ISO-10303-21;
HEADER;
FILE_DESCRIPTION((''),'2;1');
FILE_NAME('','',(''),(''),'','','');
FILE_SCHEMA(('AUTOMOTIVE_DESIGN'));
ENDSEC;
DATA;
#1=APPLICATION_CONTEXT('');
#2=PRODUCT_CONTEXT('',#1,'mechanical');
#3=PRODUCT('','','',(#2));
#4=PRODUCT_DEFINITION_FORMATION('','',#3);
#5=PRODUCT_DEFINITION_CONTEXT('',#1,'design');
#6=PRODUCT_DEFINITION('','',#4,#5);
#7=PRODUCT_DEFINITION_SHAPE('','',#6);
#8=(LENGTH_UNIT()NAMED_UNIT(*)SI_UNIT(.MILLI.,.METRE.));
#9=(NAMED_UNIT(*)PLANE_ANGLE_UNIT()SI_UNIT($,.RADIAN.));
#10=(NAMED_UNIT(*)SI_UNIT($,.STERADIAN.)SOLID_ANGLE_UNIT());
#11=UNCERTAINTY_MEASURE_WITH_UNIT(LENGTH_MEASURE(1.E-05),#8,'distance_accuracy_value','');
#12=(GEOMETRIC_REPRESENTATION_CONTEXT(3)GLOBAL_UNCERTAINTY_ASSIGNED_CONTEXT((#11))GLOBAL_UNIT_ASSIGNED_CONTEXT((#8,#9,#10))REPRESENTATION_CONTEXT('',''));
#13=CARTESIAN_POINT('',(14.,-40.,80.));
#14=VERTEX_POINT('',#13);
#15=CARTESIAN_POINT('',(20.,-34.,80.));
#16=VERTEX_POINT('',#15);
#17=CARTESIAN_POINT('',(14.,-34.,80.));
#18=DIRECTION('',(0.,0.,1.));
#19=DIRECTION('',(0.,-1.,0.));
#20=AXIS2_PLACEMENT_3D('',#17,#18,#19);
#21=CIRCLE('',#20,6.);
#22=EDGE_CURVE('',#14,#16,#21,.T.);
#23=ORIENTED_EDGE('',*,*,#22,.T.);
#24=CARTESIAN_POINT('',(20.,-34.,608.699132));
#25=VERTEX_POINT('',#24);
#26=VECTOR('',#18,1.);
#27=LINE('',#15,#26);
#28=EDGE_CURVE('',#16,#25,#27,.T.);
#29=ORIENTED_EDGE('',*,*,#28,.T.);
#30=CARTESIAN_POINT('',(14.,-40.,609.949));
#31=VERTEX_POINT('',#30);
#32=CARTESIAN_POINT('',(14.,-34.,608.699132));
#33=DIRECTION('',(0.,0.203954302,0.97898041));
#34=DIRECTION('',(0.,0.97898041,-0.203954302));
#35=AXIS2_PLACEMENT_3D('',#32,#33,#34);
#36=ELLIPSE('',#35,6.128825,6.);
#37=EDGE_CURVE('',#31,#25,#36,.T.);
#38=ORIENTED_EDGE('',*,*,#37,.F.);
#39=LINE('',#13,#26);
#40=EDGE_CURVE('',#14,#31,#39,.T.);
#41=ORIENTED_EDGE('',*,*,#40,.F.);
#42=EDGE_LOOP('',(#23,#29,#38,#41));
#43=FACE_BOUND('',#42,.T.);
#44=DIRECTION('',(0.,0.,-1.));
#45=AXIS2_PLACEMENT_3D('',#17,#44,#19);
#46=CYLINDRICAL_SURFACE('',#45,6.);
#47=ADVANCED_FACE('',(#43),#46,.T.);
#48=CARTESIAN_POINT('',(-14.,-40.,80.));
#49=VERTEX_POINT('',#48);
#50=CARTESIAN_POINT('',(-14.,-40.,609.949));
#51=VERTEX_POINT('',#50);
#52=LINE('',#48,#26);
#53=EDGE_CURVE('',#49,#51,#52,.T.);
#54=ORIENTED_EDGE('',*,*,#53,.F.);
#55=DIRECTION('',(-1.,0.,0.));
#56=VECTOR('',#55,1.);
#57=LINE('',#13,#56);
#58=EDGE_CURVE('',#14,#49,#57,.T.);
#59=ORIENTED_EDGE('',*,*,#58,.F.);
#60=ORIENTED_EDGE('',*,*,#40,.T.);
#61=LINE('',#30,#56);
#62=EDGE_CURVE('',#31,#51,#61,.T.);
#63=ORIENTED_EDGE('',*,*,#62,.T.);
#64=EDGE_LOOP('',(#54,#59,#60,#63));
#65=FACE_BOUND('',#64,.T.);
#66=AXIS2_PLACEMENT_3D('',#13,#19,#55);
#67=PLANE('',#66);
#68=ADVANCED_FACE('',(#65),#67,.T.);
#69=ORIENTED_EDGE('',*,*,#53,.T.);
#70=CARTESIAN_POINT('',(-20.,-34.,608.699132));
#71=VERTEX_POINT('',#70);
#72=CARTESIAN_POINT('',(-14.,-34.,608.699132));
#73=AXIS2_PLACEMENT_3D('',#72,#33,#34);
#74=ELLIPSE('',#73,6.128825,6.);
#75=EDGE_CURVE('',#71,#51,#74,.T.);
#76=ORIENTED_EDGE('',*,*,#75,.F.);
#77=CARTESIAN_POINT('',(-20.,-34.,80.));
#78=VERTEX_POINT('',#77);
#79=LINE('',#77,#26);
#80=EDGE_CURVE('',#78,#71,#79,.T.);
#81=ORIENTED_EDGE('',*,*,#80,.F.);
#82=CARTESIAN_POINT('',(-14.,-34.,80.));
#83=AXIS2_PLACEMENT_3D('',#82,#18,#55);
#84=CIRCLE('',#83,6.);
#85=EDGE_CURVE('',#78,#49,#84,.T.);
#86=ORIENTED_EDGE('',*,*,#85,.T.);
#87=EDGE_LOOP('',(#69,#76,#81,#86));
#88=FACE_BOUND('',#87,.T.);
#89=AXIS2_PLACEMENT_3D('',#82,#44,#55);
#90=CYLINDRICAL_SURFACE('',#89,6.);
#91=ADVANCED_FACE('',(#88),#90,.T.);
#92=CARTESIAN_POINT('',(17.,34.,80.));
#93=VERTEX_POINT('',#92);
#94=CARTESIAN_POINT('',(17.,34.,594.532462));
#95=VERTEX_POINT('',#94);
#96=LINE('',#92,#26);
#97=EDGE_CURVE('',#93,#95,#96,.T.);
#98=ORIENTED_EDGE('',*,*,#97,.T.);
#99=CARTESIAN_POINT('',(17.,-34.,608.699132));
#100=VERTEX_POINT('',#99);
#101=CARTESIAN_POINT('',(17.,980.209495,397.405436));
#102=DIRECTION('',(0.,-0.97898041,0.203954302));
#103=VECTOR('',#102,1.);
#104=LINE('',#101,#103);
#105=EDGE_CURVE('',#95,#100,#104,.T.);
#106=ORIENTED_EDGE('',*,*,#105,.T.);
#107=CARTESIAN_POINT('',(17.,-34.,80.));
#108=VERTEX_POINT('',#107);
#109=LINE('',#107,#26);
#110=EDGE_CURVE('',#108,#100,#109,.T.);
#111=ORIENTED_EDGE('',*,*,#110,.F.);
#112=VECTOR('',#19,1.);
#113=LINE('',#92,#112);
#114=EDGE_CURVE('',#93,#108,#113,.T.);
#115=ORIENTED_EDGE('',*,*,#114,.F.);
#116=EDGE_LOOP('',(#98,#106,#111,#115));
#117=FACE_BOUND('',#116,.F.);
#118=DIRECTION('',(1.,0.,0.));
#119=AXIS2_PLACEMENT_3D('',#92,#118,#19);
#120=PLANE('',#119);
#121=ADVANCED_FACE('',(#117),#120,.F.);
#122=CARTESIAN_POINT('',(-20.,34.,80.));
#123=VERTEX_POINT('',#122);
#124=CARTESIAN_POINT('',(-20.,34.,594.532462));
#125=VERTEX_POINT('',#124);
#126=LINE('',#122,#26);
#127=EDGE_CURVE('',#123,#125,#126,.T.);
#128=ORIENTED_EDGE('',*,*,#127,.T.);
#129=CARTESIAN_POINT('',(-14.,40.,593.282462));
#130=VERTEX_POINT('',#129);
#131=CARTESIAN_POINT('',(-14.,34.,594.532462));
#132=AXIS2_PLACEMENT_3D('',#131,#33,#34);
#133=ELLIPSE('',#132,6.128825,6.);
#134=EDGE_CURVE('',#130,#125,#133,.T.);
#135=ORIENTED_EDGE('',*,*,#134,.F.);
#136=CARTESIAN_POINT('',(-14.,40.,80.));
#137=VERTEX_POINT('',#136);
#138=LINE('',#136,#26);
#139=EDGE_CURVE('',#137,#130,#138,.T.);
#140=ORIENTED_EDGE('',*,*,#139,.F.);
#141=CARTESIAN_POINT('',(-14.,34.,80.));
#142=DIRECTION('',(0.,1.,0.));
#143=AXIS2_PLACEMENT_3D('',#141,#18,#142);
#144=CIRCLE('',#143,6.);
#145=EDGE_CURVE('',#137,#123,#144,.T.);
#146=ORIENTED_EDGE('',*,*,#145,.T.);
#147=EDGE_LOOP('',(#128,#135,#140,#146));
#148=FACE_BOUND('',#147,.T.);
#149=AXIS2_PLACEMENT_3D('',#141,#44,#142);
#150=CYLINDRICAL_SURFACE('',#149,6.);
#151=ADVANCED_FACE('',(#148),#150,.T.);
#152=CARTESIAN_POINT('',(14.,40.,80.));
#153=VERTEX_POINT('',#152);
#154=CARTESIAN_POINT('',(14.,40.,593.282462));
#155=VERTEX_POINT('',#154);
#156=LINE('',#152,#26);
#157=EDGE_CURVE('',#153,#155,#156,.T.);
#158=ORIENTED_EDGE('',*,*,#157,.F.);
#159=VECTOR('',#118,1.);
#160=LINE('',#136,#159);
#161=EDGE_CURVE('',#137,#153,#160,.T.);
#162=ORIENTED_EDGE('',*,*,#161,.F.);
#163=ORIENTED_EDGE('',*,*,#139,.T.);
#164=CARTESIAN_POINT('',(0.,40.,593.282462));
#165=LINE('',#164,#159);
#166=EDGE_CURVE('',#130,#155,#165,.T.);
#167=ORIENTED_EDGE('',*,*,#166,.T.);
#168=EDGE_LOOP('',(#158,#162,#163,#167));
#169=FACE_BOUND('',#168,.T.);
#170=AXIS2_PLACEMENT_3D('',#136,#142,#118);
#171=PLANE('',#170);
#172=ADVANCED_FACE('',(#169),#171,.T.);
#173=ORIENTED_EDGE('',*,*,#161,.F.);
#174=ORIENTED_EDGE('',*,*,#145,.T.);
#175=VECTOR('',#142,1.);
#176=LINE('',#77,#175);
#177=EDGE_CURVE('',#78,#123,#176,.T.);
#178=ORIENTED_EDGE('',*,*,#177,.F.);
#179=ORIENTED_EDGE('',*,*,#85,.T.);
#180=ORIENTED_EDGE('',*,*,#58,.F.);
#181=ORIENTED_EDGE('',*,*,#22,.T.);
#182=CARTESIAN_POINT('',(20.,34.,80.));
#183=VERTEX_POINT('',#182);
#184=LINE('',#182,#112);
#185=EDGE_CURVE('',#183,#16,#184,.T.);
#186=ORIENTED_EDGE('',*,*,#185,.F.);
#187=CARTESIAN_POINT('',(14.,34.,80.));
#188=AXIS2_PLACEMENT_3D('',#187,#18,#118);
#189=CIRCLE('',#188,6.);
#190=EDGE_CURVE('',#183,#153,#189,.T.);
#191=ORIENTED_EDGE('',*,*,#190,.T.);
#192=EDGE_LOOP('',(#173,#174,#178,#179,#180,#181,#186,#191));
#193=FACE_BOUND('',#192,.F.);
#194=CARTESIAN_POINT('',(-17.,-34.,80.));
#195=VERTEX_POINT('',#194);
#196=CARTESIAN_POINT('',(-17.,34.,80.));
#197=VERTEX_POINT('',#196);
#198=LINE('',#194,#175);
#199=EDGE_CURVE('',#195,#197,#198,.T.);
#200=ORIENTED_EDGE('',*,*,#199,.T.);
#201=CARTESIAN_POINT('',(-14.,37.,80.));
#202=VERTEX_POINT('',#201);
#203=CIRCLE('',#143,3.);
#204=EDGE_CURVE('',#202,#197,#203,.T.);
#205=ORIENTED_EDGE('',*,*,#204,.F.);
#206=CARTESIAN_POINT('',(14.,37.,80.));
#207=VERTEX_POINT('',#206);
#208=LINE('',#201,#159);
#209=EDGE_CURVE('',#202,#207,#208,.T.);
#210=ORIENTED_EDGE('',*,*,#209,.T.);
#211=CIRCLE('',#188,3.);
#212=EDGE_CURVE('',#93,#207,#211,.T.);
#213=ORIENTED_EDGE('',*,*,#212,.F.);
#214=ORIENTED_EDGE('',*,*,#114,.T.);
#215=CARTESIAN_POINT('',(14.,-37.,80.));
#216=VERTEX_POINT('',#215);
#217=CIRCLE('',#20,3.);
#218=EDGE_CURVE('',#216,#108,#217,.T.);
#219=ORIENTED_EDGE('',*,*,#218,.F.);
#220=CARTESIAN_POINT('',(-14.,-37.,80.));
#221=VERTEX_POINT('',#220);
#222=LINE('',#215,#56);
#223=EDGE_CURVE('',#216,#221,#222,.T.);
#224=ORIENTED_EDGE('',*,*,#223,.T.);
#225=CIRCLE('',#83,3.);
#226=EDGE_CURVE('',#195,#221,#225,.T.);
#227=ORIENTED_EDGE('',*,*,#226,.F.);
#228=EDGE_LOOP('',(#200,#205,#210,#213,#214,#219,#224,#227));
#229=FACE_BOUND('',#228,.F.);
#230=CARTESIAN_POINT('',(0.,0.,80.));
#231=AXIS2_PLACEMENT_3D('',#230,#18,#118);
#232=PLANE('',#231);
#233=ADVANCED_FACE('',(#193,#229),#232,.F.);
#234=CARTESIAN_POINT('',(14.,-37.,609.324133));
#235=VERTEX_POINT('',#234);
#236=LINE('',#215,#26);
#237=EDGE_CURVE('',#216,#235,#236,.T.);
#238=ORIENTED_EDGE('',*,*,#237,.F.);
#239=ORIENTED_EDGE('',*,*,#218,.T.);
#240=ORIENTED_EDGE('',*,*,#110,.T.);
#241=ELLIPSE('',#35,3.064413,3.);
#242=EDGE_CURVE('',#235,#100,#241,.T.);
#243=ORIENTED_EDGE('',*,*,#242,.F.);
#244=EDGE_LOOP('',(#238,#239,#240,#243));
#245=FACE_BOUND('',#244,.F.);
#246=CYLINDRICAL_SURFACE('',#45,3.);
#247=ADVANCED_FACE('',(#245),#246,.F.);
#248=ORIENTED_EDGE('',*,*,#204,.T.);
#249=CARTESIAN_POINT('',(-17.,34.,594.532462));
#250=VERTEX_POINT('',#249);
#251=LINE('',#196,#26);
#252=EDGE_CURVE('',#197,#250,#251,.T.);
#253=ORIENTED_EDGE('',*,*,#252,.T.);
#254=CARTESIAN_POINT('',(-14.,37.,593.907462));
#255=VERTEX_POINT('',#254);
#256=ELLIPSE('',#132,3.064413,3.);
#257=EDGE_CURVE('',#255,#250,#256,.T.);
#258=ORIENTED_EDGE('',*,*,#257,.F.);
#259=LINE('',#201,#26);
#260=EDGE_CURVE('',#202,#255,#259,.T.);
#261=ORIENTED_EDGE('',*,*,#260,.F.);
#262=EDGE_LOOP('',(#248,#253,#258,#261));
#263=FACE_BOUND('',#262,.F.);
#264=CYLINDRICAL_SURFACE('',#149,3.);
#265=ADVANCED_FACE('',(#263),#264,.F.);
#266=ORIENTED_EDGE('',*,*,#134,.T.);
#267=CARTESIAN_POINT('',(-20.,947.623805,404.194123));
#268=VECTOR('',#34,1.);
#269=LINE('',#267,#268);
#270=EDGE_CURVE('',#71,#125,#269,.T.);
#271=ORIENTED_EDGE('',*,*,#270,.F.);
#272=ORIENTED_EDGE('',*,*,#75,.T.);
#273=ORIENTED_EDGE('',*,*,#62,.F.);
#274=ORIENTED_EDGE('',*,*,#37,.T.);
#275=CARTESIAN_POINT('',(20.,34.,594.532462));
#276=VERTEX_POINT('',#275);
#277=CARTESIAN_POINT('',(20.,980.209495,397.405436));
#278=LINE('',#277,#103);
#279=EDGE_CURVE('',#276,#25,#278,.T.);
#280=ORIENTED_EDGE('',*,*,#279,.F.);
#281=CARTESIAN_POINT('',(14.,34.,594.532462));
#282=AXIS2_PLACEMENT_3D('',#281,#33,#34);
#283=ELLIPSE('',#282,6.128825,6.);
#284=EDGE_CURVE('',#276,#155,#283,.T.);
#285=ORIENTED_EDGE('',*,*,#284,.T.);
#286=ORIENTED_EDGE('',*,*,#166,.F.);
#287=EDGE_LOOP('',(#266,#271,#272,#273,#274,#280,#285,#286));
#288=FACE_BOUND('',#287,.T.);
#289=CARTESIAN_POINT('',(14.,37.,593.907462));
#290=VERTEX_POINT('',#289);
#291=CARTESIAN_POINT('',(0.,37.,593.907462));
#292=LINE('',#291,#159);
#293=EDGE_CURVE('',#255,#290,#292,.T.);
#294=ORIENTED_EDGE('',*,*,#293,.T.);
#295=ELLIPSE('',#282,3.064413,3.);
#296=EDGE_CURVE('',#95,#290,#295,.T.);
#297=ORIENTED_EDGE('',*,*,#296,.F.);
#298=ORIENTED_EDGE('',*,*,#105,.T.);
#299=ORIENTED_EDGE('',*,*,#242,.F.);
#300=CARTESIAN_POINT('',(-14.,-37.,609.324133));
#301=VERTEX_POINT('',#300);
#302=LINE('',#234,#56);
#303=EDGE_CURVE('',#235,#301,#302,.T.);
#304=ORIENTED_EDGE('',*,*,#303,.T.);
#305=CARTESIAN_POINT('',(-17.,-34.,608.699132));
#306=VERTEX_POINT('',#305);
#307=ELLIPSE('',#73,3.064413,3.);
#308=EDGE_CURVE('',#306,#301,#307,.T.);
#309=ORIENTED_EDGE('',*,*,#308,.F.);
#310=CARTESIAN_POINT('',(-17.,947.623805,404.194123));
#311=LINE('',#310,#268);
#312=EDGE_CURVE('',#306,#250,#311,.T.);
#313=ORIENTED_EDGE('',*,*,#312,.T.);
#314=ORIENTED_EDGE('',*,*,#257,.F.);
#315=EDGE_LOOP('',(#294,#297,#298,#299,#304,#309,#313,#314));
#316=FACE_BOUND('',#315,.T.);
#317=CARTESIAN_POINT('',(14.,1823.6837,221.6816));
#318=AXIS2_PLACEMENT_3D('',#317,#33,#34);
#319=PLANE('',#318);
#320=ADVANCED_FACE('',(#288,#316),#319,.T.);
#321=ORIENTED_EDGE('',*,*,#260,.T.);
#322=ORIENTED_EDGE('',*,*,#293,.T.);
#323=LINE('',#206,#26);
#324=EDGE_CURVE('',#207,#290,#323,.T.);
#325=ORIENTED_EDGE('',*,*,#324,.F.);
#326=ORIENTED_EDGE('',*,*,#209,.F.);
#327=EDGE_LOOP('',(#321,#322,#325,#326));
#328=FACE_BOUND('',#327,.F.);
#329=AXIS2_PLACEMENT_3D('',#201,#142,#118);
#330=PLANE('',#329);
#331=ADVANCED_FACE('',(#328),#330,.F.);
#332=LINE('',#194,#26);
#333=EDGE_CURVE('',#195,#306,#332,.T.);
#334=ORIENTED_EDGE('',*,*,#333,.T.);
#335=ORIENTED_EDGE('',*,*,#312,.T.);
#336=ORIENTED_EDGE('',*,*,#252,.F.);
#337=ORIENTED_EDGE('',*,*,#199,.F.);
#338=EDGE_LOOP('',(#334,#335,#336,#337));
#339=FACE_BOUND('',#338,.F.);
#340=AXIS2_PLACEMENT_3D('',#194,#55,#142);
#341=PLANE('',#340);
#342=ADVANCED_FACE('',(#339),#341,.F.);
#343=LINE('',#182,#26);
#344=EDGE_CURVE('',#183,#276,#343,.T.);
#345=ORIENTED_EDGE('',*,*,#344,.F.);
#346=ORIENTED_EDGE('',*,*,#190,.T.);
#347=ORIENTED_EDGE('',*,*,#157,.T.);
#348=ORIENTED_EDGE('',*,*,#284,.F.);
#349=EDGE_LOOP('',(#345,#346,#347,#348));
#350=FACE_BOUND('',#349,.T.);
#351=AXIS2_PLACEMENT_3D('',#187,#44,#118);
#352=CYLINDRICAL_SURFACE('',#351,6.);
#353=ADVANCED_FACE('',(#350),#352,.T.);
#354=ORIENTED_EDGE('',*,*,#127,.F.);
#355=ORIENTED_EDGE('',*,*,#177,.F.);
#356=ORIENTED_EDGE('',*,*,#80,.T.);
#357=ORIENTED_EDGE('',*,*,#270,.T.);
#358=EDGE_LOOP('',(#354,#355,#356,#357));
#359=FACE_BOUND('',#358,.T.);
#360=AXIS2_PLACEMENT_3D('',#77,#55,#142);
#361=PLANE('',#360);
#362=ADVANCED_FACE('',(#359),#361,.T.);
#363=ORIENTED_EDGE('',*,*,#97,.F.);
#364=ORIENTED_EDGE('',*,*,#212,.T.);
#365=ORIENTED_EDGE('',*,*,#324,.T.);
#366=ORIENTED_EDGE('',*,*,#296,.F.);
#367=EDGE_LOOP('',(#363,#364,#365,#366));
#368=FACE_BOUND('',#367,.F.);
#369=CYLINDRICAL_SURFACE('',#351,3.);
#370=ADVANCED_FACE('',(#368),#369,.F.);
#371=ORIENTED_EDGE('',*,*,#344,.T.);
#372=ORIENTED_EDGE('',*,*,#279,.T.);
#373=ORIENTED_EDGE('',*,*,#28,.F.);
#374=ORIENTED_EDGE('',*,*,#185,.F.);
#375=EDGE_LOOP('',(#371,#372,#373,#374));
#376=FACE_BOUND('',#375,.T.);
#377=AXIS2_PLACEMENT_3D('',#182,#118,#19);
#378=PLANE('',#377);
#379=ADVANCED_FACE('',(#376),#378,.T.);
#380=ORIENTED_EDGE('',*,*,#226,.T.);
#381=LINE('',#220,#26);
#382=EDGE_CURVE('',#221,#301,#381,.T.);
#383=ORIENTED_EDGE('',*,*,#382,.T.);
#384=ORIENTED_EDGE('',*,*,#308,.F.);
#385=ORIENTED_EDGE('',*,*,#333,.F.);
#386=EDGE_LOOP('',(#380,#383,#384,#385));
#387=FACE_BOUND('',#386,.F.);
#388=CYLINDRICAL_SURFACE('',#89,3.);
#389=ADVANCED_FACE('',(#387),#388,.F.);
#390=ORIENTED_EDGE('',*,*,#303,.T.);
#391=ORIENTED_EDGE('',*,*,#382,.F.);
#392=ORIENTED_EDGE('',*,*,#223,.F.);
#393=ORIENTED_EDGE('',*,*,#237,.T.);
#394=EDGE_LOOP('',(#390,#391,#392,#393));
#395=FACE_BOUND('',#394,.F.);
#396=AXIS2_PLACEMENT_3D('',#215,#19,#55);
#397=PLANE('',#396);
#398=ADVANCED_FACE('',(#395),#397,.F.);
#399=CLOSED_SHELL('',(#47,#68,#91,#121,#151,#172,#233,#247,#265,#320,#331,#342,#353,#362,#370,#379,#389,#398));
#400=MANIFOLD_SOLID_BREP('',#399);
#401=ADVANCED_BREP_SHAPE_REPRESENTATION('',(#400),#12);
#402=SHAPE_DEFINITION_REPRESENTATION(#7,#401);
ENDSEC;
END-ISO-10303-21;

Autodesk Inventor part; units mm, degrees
ref_plane "Start Plane" through (0, 0, 80) normal (0, 0, 1) x (1, 0, 0)
ref_plane "End Plane" through (0, 0, 609.949) normal (0, 0, 1) x (1, 0, 0)
sketch "Sketch" plane through (0, 0, 0) normal (0, 0, 1) x (1, 0, 0)
  line L0 (-20, -34) -> (-20, 34)
  line L1 (-14, 40) -> (14, 40)
  line L2 (20, 34) -> (20, -34)
  line L3 (14, -40) -> (-14, -40)
  arc A0 (-20, -34) -> (-14, -40) centre (-14, -34) ccw
  arc A1 (20, 34) -> (14, 40) centre (14, 34) ccw
  arc A2 (-14, 40) -> (-20, 34) centre (-14, 34) ccw
  arc A3 (14, -40) -> (20, -34) centre (14, -34) ccw
  arc A4 (-14, 37) -> (-17, 34) centre (-14, 34) ccw
  line L4 (-14, 37) -> (14, 37)
  arc A5 (17, 34) -> (14, 37) centre (14, 34) ccw
  line L5 (17, 34) -> (17, -34)
  arc A6 (14, -37) -> (17, -34) centre (14, -34) ccw
  line L6 (14, -37) -> (-14, -37)
  arc A7 (-17, -34) -> (-14, -37) centre (-14, -34) ccw
  line L7 (-17, -34) -> (-17, 34)
  line L8 (0, 57.7397) -> (0, -57.7397) construction
  line L9 (-29.7397, 0) -> (29.7397, 0) construction
  dimension "d7" = 6
  dimension "d9" = 40
  dimension "d11" = 80
  dimension "d12" = 3
  dimension "d15" = 20
  dimension "d16" = 40
extrude "Body" add sketch "Sketch" along normal up to surface (529.949 mm away) from surface at 80
sketch "Sketch3" plane through (0, 0, 0) normal (0, 0, 1) x (1, 0, 0)
  line L0 (0, 0) -> (10, 0)
ref_plane "Work Plane3" through (0, 0, 0) normal (0, -1, 0) x (1, 0, 0)
ref_plane "Work Plane4" through (14, 1823.6837, 221.6816) normal (0, 0.2039543, 0.9789804) x (1, 0, 0)
split "Split1" plane through (14, 1823.6837, 221.6816) removes the side toward (0, 0.2039543, 0.9789804)
sketch "Sketch4" plane through (0, 0, 0) normal (0, -1, 0) x (1, 0, 0)
  line L0 (-2, 80) -> (12, 80) projected
  line L1 (-2, 609.949) -> (12, 609.949) projected
  dimension "d18" = 529.949
equation "\"d7\" = G_IR"
equation "\"d9\" = G_W"
equation "\"d11\" = G_H"
equation "\"d12\" = G_T"
equation "\"d15\" = 0.5 * d9"
equation "\"d16\" = 0.5 * d11"
equation "\"d3\" = G_L"
equation "\"G_W\" = 40"
equation "\"G_H\" = 80"
equation "\"G_T\" = 3"
equation "\"G_IR\" = 6"
equation "\"G_L\" = d18"
equation "\"G_OFFSET_END\" = -65.051"
equation "\"d14\" = G_OFFSET_END + B_L"
equation "\"B_L\" = 675"
properties part number "ISO 10799-2 - 80x40x3 - 529.95" material "Steel, Mild"
